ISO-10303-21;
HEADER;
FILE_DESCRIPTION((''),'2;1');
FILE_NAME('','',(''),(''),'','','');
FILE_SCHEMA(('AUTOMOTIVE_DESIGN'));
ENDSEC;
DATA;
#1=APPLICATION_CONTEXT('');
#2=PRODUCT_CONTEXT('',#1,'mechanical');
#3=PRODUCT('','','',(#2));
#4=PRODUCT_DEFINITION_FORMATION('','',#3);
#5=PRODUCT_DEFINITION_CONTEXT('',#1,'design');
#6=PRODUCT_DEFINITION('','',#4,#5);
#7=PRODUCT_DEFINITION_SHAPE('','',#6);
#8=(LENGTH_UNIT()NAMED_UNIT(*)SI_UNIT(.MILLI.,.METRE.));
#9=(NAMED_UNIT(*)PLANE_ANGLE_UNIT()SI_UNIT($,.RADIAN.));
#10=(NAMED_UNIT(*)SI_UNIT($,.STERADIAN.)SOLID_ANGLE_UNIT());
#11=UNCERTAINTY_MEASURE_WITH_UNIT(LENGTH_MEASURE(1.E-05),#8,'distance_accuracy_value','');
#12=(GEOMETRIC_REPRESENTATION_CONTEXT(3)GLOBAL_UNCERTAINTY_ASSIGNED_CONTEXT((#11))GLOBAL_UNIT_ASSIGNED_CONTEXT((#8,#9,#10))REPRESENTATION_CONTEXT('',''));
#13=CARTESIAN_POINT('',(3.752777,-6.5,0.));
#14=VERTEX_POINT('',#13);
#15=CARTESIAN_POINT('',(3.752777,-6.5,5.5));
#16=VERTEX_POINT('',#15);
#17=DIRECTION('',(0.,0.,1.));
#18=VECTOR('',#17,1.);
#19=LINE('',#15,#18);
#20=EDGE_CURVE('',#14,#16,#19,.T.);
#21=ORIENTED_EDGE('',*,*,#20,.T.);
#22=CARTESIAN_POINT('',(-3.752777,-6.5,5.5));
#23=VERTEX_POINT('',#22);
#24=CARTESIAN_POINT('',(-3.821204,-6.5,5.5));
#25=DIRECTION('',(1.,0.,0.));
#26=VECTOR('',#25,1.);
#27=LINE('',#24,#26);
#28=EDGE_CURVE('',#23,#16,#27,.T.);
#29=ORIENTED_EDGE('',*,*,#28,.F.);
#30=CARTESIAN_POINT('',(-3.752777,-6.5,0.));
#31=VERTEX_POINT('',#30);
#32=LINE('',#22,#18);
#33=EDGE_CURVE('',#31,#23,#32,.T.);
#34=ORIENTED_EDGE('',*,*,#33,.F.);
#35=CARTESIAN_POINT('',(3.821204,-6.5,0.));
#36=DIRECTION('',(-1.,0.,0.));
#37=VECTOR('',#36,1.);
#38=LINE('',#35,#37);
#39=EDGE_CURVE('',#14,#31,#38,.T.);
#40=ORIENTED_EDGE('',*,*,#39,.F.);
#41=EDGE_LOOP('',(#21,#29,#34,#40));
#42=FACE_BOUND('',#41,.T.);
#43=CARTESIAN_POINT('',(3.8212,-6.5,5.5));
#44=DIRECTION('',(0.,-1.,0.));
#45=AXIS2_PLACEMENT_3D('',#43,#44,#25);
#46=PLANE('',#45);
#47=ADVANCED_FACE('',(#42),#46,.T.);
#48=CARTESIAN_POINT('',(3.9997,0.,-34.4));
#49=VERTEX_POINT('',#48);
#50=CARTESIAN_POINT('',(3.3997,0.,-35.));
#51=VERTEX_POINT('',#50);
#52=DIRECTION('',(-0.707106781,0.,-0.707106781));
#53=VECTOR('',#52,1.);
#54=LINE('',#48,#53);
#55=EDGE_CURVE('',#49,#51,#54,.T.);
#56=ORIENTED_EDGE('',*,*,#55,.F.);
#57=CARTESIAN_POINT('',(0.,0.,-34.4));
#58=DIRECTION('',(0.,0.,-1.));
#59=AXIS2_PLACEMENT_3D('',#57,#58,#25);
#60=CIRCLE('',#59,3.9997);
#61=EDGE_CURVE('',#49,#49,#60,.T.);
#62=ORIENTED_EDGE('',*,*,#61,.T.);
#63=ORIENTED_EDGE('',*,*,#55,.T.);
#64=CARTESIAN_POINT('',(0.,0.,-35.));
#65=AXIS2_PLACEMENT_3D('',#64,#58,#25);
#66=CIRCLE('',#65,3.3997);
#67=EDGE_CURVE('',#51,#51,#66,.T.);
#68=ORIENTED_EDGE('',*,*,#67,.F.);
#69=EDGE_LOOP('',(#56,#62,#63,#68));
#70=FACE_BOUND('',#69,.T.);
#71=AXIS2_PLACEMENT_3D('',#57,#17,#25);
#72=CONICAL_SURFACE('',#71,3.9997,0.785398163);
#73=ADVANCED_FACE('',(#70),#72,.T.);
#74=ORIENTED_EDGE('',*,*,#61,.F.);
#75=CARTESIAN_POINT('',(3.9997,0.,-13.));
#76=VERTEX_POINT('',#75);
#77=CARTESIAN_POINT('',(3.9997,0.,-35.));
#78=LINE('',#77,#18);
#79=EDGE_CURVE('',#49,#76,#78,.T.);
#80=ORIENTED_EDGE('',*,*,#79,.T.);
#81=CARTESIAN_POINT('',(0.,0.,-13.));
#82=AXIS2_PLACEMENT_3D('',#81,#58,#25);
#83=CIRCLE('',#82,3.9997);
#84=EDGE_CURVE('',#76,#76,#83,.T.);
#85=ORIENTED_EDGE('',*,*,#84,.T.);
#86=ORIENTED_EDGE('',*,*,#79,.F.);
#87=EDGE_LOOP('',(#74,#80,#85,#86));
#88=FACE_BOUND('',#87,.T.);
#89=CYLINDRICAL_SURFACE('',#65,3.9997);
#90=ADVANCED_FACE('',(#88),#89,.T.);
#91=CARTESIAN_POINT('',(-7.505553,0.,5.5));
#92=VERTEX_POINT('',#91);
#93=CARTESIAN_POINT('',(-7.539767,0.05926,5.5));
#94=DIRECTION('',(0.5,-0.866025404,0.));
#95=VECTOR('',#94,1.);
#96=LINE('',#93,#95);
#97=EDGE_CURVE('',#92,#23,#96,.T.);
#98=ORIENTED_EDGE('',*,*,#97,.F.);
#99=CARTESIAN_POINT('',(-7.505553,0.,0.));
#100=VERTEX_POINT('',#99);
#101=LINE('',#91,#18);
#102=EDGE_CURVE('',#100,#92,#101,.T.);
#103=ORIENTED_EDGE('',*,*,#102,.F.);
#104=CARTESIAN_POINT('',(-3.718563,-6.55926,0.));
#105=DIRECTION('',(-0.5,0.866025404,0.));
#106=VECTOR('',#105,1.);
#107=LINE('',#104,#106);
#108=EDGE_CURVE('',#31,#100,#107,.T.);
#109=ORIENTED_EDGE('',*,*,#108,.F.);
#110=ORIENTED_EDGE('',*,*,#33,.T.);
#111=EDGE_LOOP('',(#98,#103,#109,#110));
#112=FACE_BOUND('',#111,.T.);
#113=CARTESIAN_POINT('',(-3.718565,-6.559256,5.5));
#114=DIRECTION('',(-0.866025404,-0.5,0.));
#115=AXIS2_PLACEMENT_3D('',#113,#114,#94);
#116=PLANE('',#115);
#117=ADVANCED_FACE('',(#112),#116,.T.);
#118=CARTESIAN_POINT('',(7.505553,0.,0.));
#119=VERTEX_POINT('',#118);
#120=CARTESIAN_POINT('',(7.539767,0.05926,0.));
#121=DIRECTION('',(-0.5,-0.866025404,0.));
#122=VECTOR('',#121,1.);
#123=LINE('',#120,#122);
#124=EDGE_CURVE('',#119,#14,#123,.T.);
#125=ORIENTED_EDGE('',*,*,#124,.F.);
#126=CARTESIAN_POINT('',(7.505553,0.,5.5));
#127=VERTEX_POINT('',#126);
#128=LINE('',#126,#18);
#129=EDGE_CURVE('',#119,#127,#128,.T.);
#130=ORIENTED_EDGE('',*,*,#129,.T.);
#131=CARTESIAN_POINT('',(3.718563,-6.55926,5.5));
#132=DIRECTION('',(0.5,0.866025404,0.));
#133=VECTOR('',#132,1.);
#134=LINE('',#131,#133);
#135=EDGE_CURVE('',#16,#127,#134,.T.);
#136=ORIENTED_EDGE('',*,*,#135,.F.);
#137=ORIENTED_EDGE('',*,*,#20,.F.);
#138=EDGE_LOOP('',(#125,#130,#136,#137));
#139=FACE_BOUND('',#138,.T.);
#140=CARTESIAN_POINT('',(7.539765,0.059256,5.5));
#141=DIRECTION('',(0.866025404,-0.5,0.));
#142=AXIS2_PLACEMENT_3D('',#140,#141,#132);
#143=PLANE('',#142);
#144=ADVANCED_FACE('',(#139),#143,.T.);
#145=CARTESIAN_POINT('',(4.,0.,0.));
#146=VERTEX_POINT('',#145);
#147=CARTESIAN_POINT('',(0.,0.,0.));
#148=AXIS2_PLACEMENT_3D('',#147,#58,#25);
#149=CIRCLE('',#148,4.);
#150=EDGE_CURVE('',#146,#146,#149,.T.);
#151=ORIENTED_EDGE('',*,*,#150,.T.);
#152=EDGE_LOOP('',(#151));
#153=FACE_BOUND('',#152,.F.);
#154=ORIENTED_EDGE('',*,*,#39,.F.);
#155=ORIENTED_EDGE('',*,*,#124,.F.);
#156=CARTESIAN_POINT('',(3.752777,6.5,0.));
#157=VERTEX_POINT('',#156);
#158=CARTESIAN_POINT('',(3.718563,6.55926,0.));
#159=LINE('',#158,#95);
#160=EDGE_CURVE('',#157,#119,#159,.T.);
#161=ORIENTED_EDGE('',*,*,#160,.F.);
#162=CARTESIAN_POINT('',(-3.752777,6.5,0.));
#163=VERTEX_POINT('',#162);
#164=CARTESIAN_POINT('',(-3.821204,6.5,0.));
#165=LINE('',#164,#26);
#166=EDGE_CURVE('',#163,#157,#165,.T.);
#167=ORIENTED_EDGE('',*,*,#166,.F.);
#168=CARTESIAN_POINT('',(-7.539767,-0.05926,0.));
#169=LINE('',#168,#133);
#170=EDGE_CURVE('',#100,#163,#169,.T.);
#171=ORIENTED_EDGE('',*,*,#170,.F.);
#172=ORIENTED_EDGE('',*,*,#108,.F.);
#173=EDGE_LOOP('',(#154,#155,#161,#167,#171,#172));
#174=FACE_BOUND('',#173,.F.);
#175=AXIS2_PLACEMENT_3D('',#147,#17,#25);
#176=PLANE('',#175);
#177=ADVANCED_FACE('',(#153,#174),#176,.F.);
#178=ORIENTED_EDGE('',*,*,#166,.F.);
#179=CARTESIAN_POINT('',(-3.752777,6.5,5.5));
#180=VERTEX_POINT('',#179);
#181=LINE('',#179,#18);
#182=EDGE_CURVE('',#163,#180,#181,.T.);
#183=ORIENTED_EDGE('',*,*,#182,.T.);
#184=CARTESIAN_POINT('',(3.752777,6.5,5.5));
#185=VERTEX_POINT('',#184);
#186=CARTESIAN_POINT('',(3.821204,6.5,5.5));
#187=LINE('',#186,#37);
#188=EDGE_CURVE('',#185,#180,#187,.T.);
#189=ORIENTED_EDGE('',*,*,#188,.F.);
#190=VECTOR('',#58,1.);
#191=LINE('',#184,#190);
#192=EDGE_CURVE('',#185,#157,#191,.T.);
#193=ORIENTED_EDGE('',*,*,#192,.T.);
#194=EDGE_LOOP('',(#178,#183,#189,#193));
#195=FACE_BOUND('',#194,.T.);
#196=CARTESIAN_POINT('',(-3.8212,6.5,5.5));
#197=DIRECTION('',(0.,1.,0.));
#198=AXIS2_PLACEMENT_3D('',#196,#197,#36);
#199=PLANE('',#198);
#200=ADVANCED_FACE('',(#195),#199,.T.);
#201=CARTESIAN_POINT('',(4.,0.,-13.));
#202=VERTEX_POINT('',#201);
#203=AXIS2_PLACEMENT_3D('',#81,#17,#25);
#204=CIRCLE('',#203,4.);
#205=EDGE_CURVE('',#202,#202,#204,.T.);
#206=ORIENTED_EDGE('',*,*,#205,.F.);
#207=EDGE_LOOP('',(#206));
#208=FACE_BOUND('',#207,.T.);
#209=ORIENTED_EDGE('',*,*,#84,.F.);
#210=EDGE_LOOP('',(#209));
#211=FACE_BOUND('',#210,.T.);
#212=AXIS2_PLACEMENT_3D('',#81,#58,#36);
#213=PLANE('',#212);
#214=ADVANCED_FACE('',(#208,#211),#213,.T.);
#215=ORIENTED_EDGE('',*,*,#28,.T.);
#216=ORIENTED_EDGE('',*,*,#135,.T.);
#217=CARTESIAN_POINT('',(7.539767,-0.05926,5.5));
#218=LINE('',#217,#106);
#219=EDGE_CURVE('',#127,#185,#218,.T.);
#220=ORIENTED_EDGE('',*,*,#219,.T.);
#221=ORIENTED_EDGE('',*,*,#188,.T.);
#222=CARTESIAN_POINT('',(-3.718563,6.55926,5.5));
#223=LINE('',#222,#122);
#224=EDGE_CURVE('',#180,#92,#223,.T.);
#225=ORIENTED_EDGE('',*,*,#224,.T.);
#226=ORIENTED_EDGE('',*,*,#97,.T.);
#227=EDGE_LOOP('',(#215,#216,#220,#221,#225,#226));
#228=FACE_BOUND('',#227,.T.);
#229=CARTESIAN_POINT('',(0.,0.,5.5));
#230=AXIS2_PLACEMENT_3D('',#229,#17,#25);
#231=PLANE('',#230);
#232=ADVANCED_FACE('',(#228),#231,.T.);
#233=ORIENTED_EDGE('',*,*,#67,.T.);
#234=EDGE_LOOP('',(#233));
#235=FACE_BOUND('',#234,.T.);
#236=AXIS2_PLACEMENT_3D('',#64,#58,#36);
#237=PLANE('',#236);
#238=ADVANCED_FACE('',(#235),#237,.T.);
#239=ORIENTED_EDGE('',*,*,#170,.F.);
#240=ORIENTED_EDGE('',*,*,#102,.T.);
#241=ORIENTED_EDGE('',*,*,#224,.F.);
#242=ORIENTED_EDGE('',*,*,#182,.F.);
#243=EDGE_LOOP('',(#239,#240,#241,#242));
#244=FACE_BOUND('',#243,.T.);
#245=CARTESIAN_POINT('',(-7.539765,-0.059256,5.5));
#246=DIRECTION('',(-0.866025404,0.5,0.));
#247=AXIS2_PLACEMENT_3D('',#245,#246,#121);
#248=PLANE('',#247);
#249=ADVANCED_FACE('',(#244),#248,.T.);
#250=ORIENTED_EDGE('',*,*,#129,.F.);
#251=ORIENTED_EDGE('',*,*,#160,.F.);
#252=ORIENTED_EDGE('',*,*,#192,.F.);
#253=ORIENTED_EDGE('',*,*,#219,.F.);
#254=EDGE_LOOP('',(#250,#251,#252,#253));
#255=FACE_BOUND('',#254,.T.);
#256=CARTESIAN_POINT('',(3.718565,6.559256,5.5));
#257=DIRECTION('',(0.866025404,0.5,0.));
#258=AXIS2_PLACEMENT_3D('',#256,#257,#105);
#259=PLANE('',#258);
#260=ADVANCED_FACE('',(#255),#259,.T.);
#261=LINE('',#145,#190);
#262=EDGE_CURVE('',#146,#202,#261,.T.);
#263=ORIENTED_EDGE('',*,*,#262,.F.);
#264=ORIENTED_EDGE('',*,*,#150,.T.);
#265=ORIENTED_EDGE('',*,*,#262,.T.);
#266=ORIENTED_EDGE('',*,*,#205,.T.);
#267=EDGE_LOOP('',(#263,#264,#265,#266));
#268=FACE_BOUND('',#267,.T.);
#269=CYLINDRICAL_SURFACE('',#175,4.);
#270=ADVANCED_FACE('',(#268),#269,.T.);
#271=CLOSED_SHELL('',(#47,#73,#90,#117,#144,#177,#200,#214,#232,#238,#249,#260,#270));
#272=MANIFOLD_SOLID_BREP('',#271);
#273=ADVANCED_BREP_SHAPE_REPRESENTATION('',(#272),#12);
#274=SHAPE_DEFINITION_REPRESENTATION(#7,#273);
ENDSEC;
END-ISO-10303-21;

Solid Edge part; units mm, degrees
sketch "Sketch1" plane through (0, 0, 0) normal (0, 0, 1) x (1, 0, 0)
  circle A0 centre (0, 0) radius 7.54
  dimension "D1" = 15.08
extrude "Protrusion1" add sketch "Sketch1" along normal blind 5.5
sketch "Sketch2" plane through (0, 0, 0) normal (0, 0, -1) x (1, 0, 0)
  circle A0 centre (0, 0) radius 4
extrude "Protrusion2" add sketch "Sketch2" along normal blind 35
sketch "Sketch3" plane through (0, 0, -35) normal (0, 0, -1) x (1, 0, 0)
  circle A0 centre (0, 0) radius 3.9997
extrude "Cutout1" cut sketch "Sketch3" against normal blind 22 flip side to cut
chamfer "Chamfer_1" distance 0.6 angle 45 1 edges at (-3.9997, 0, -35)
sketch "Sketch4" plane through (0, 0, 5.5) normal (0, 0, 1) x (1, 0, 0)
  line L0 (-3.8212, 6.5) -> (3.8212, 6.5)
  dimension "D1" = 13
extrude "Cutout2" cut sketch "Sketch4" against normal up to next material side at (0, 6.55, 5.5)
pattern_circular "Pattern1" count 6 over 360 about axis through (0, 0, 5.5) along (0, 0, 1) of "Cutout2"
properties part number "24104326"
